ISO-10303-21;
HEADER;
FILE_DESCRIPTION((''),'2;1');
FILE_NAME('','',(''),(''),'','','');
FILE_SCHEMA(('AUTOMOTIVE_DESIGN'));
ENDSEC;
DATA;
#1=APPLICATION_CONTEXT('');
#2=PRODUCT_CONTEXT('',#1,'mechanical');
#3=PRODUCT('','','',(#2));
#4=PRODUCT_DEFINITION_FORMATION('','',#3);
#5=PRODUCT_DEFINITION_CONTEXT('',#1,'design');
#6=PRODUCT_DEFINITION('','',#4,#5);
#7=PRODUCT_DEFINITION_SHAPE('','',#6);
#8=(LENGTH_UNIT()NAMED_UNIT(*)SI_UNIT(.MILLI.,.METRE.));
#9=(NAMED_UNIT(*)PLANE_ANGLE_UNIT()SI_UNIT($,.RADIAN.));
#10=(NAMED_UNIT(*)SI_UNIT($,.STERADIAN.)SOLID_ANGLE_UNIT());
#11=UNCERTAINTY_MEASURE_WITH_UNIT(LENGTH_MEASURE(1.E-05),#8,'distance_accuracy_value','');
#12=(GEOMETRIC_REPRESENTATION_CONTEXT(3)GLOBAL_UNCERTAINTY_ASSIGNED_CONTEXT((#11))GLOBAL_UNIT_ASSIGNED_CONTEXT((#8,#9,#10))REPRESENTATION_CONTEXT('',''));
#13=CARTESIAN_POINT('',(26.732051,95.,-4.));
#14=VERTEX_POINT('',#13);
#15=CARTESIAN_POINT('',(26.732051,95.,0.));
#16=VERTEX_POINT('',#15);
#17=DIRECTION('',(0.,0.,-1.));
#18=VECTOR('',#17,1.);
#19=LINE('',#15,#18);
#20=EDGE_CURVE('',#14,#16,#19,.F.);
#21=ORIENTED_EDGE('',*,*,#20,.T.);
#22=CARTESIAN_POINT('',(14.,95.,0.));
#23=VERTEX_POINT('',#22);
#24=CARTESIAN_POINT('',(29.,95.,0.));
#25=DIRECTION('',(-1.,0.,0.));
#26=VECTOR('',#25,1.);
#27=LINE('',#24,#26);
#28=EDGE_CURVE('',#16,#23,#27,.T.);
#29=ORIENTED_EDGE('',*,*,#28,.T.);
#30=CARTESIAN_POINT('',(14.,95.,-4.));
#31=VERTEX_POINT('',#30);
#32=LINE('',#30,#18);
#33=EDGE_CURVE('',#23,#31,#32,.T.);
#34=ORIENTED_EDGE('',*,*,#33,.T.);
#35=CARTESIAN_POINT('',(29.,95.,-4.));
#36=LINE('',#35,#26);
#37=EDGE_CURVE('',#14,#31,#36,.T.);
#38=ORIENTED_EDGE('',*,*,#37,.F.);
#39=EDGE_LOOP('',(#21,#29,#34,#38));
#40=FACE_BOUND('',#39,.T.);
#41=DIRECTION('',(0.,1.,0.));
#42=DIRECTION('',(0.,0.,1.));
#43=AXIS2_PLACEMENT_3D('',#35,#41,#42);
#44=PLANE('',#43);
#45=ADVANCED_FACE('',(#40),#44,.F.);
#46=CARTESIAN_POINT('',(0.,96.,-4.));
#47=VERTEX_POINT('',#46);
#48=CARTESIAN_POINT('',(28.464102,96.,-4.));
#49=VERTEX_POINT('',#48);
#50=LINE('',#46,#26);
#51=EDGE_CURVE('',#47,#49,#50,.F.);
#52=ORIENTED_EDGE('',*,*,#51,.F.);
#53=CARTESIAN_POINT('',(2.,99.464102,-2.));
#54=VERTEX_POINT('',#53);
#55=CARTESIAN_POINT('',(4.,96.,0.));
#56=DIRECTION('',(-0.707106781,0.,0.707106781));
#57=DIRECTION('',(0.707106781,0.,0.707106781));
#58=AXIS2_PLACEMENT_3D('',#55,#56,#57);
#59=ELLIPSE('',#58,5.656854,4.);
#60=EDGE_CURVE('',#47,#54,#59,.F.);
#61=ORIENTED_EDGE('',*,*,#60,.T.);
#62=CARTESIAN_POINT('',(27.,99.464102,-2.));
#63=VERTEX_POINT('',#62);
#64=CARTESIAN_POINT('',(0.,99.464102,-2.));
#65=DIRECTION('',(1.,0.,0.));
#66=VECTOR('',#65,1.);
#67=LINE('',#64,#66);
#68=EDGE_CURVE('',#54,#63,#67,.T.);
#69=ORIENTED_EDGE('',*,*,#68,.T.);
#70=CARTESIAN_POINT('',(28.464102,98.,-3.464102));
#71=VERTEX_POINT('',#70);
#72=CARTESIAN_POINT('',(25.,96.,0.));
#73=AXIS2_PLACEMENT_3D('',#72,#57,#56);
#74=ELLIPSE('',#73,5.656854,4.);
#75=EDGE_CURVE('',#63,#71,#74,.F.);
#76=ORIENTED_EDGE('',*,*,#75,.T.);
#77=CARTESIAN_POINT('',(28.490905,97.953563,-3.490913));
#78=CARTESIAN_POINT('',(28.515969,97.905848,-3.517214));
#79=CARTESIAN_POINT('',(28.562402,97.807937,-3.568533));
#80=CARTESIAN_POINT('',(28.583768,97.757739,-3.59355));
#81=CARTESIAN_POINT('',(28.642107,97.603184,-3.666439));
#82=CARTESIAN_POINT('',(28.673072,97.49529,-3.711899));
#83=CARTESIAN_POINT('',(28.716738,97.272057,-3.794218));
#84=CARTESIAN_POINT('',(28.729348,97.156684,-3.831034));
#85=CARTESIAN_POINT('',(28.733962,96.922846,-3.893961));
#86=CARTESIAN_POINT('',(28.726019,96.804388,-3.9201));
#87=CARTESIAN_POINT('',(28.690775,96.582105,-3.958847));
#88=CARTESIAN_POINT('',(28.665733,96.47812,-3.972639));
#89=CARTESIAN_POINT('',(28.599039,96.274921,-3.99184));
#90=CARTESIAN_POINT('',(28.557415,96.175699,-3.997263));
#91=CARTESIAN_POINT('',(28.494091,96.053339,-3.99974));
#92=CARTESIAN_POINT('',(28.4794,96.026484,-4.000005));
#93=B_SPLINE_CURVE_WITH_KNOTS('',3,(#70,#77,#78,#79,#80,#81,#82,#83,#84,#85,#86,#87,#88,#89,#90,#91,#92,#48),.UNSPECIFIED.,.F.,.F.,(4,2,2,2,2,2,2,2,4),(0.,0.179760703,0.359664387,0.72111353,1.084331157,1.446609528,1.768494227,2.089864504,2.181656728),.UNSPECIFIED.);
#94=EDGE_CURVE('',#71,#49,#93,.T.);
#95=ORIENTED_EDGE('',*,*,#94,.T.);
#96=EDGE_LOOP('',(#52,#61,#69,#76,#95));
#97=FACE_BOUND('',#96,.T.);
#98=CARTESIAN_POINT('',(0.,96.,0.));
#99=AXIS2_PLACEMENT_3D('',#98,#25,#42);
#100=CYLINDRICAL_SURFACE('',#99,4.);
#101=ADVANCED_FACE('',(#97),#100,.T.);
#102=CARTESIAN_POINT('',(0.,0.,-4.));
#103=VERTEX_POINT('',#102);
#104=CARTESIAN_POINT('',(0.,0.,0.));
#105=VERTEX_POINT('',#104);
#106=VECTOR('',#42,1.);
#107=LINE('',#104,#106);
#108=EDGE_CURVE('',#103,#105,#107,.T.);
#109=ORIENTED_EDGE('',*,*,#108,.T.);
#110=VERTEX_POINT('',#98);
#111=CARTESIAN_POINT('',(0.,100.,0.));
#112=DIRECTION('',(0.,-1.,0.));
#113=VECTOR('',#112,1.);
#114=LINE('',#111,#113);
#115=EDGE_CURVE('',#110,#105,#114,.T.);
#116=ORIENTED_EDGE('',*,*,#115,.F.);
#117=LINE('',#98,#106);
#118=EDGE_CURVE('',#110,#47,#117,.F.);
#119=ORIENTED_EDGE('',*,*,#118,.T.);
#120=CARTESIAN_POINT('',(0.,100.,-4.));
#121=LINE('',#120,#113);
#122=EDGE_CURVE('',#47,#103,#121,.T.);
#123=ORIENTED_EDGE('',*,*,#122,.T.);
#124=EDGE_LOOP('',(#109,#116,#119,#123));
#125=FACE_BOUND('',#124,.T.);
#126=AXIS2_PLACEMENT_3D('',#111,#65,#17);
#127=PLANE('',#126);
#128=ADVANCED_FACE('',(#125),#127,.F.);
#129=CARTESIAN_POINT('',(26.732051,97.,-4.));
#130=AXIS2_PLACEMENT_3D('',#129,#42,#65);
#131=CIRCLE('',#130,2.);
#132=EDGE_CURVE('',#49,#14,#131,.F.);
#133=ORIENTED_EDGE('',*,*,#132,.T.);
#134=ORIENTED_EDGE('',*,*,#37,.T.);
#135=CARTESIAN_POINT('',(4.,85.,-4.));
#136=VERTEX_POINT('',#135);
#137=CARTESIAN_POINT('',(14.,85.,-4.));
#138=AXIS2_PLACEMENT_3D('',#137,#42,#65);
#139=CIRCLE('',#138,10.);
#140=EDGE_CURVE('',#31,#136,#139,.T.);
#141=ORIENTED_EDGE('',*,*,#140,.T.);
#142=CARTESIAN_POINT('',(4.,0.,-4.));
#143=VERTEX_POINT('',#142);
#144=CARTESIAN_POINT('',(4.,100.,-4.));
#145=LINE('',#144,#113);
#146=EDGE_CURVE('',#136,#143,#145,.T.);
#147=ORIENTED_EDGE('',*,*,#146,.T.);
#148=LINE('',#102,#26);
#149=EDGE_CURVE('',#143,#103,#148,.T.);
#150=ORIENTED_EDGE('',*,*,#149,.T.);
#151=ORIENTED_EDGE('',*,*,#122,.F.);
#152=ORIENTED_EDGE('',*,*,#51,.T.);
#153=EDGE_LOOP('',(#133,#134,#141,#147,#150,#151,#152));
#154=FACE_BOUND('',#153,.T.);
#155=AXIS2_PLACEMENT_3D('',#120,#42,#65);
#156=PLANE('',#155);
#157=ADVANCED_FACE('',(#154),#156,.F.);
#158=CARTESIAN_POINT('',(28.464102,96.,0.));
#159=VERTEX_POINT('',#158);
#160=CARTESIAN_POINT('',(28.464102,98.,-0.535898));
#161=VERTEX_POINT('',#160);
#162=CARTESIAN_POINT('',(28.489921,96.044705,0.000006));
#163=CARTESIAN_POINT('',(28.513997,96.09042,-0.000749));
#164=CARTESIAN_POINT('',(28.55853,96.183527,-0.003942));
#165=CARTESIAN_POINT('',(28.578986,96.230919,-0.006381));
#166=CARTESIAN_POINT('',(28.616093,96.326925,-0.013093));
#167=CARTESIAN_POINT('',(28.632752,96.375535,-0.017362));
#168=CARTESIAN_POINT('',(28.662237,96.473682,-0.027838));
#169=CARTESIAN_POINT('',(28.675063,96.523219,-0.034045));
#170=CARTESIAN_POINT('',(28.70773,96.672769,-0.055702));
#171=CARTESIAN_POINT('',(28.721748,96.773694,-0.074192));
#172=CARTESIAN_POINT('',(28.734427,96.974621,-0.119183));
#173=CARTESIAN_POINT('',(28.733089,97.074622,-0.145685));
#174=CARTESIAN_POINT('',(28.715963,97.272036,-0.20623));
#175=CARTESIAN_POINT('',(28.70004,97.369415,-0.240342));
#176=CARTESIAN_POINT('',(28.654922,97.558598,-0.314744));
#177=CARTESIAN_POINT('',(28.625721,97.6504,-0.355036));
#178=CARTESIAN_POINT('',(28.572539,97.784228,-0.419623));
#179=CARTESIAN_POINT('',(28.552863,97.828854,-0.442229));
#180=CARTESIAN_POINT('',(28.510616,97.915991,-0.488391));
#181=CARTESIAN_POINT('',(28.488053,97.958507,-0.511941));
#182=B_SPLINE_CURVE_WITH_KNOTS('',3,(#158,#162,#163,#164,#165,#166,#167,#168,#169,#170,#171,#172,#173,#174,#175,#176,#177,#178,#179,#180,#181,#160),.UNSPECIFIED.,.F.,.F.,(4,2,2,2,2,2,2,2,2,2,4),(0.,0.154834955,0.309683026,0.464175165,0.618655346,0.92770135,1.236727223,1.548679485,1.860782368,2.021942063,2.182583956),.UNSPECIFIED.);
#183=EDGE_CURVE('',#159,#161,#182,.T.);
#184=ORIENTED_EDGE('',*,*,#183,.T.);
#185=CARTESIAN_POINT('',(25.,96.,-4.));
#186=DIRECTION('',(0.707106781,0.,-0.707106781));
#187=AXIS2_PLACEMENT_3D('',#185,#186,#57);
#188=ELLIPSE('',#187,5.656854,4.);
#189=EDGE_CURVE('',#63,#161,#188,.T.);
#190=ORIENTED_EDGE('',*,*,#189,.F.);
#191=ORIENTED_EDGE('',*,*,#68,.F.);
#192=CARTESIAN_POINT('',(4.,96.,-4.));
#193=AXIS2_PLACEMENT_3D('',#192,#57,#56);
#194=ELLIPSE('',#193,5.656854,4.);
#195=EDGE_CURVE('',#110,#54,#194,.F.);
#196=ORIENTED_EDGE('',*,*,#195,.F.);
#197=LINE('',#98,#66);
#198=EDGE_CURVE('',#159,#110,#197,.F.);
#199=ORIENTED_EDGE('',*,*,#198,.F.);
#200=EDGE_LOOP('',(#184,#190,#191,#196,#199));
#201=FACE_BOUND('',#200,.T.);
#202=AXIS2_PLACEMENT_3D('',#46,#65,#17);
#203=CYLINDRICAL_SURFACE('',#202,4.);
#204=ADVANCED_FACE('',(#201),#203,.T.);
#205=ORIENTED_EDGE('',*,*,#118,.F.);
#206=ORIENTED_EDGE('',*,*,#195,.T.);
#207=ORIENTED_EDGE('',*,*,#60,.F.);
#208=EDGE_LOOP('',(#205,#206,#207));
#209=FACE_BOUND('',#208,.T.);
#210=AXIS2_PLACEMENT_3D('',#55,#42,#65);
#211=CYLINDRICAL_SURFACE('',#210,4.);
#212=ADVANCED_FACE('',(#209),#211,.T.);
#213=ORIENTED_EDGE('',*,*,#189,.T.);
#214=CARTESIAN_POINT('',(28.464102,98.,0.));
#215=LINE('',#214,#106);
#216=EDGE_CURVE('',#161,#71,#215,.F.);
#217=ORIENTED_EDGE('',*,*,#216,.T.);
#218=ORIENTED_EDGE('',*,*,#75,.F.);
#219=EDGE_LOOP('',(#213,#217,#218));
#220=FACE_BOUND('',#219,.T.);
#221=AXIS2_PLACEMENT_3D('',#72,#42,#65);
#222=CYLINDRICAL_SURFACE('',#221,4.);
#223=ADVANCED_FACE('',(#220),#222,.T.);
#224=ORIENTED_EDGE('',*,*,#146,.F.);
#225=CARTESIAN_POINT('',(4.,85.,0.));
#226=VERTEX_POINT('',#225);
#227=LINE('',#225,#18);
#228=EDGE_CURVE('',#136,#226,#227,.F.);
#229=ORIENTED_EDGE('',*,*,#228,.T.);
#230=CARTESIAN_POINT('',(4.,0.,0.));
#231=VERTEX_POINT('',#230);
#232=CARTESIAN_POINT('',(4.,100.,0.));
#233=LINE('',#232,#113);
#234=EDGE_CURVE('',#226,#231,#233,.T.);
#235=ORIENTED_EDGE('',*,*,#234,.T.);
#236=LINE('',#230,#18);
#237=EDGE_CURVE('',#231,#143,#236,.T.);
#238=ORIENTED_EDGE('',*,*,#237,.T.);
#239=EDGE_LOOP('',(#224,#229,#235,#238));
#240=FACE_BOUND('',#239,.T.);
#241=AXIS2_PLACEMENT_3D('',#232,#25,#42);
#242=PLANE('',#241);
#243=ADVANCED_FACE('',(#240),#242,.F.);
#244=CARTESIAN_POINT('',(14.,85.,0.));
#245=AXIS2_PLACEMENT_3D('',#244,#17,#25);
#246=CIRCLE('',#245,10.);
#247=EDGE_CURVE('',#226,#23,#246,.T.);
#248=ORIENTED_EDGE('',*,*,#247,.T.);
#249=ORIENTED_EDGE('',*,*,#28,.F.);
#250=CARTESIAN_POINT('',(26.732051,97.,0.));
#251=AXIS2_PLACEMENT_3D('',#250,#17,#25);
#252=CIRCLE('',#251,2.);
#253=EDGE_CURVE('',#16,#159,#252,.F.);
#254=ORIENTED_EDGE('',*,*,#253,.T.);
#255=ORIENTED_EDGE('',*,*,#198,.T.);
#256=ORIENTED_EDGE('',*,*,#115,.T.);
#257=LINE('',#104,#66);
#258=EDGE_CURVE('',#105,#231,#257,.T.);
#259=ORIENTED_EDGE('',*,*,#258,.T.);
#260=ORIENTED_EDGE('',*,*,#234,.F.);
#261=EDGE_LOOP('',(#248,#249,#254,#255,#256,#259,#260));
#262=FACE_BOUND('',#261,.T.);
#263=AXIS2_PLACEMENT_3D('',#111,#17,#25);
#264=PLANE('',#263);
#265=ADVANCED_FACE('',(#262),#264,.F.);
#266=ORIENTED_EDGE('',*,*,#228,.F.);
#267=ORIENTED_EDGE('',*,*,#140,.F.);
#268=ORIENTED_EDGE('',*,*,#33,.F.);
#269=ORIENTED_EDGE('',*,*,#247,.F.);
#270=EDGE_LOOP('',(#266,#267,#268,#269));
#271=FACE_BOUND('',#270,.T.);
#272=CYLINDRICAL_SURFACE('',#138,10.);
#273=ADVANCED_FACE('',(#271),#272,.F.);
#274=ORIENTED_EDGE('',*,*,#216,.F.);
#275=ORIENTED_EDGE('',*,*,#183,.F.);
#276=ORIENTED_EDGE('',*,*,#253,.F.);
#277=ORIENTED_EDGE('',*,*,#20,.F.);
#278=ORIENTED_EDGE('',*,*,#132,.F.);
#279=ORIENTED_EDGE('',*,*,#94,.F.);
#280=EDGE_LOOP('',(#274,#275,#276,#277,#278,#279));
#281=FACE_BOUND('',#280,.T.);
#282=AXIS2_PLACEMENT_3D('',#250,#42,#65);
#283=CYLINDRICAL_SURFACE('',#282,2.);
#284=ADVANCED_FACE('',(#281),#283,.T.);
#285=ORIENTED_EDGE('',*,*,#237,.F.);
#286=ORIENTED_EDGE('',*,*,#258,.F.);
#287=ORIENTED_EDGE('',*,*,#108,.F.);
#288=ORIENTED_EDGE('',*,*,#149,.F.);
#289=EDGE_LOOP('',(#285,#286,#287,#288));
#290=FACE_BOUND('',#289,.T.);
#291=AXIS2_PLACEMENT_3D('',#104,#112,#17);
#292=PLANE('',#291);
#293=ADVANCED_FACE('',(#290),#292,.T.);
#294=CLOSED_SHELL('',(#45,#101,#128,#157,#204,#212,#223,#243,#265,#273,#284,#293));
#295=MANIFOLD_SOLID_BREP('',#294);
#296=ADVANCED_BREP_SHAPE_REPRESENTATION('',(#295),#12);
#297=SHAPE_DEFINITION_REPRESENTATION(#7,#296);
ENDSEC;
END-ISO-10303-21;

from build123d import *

# Parameters (mm, degrees)
SKETCH1_W           = 4
SKETCH1_H           = 4
BOSS_EXTRUDE1_DEPTH = 100
SKETCH2_W           = 4
SKETCH2_H           = 5
BOSS_EXTRUDE2_DEPTH = 25
FILLET1_R           = 10
FILLET3_R           = 4
FILLET4_R           = 2


with BuildPart() as part:
    # Sketch1 → Boss-Extrude1 (new body)
    with BuildSketch(Plane(origin=(0, 0, 0), x_dir=(1, 0, 0), z_dir=(0, 1, 0))):
        with Locations((2, 2)):
            Rectangle(SKETCH1_W, SKETCH1_H)
    extrude(amount=BOSS_EXTRUDE1_DEPTH)

    # Sketch2 → Boss-Extrude2 (add)
    with BuildSketch(Plane(origin=(4, 0, 0), x_dir=(0, 0, -1), z_dir=(1, 0, 0))):
        with Locations((2, 97.5)):
            Rectangle(SKETCH2_W, SKETCH2_H)
    extrude(amount=BOSS_EXTRUDE2_DEPTH)

    # Fillet1
    fillet1_edges = [part.edges().sort_by_distance(p)[0] for p in [
        (4, 95, -2),
    ]]
    fillet(fillet1_edges, radius=FILLET1_R)

    # Fillet3
    # the kernel refuses this fillet: 4 mm, written as the material it takes off along each edge
    with BuildSketch(Plane(origin=(39, 100, -4), x_dir=(0, 0, 1), z_dir=(-1, 0, 0)), Plane(origin=(39, 100, 0), x_dir=(0, -1, 0), z_dir=(-1, 0, 0))) as fillet3_piece_1:
        with BuildLine():
            CenterArc((FILLET3_R, -FILLET3_R), FILLET3_R, 90, 90)
            Line((0, -FILLET3_R), (0, 0))
            Line((0, 0), (FILLET3_R, 0))
        make_face()
    extrude(amount=49, mode=Mode.SUBTRACT)
    with BuildSketch(Plane(origin=(29, 100, -14), x_dir=(0, -1, 0), z_dir=(0, 0, 1)), Plane(origin=(0, 100, -14), x_dir=(1, 0, 0), z_dir=(0, 0, 1))) as fillet3_piece_2:
        with BuildLine():
            CenterArc((FILLET3_R, -FILLET3_R), FILLET3_R, 90, 90)
            Line((0, -FILLET3_R), (0, 0))
            Line((0, 0), (FILLET3_R, 0))
        make_face()
    extrude(amount=24, mode=Mode.SUBTRACT)

    # Fillet4
    # the kernel refuses this fillet: 2 mm, written as the material it takes off along each edge
    with BuildSketch(Plane(origin=(29, 95, 7.618721628), x_dir=(-1, 0, 0), z_dir=(0, 0, -1))) as fillet4_piece_1:
        with BuildLine():
            CenterArc((2.267949192, 2), FILLET4_R, 150, 120)
            Line((0.535898385, 3), (0.362693304, 3.1))
            ThreePointArc((0.362693304, 3.1), (-0.2, 1), (-0.2, 0))
            Line((-0.2, 0), (0, -0.2))
            Line((0, -0.2), (2.267949192, -0.2))
            Line((2.267949192, -0.2), (2.267949192, 0))
        make_face()
    extrude(amount=19.237443256, mode=Mode.SUBTRACT)


solid = part.part
